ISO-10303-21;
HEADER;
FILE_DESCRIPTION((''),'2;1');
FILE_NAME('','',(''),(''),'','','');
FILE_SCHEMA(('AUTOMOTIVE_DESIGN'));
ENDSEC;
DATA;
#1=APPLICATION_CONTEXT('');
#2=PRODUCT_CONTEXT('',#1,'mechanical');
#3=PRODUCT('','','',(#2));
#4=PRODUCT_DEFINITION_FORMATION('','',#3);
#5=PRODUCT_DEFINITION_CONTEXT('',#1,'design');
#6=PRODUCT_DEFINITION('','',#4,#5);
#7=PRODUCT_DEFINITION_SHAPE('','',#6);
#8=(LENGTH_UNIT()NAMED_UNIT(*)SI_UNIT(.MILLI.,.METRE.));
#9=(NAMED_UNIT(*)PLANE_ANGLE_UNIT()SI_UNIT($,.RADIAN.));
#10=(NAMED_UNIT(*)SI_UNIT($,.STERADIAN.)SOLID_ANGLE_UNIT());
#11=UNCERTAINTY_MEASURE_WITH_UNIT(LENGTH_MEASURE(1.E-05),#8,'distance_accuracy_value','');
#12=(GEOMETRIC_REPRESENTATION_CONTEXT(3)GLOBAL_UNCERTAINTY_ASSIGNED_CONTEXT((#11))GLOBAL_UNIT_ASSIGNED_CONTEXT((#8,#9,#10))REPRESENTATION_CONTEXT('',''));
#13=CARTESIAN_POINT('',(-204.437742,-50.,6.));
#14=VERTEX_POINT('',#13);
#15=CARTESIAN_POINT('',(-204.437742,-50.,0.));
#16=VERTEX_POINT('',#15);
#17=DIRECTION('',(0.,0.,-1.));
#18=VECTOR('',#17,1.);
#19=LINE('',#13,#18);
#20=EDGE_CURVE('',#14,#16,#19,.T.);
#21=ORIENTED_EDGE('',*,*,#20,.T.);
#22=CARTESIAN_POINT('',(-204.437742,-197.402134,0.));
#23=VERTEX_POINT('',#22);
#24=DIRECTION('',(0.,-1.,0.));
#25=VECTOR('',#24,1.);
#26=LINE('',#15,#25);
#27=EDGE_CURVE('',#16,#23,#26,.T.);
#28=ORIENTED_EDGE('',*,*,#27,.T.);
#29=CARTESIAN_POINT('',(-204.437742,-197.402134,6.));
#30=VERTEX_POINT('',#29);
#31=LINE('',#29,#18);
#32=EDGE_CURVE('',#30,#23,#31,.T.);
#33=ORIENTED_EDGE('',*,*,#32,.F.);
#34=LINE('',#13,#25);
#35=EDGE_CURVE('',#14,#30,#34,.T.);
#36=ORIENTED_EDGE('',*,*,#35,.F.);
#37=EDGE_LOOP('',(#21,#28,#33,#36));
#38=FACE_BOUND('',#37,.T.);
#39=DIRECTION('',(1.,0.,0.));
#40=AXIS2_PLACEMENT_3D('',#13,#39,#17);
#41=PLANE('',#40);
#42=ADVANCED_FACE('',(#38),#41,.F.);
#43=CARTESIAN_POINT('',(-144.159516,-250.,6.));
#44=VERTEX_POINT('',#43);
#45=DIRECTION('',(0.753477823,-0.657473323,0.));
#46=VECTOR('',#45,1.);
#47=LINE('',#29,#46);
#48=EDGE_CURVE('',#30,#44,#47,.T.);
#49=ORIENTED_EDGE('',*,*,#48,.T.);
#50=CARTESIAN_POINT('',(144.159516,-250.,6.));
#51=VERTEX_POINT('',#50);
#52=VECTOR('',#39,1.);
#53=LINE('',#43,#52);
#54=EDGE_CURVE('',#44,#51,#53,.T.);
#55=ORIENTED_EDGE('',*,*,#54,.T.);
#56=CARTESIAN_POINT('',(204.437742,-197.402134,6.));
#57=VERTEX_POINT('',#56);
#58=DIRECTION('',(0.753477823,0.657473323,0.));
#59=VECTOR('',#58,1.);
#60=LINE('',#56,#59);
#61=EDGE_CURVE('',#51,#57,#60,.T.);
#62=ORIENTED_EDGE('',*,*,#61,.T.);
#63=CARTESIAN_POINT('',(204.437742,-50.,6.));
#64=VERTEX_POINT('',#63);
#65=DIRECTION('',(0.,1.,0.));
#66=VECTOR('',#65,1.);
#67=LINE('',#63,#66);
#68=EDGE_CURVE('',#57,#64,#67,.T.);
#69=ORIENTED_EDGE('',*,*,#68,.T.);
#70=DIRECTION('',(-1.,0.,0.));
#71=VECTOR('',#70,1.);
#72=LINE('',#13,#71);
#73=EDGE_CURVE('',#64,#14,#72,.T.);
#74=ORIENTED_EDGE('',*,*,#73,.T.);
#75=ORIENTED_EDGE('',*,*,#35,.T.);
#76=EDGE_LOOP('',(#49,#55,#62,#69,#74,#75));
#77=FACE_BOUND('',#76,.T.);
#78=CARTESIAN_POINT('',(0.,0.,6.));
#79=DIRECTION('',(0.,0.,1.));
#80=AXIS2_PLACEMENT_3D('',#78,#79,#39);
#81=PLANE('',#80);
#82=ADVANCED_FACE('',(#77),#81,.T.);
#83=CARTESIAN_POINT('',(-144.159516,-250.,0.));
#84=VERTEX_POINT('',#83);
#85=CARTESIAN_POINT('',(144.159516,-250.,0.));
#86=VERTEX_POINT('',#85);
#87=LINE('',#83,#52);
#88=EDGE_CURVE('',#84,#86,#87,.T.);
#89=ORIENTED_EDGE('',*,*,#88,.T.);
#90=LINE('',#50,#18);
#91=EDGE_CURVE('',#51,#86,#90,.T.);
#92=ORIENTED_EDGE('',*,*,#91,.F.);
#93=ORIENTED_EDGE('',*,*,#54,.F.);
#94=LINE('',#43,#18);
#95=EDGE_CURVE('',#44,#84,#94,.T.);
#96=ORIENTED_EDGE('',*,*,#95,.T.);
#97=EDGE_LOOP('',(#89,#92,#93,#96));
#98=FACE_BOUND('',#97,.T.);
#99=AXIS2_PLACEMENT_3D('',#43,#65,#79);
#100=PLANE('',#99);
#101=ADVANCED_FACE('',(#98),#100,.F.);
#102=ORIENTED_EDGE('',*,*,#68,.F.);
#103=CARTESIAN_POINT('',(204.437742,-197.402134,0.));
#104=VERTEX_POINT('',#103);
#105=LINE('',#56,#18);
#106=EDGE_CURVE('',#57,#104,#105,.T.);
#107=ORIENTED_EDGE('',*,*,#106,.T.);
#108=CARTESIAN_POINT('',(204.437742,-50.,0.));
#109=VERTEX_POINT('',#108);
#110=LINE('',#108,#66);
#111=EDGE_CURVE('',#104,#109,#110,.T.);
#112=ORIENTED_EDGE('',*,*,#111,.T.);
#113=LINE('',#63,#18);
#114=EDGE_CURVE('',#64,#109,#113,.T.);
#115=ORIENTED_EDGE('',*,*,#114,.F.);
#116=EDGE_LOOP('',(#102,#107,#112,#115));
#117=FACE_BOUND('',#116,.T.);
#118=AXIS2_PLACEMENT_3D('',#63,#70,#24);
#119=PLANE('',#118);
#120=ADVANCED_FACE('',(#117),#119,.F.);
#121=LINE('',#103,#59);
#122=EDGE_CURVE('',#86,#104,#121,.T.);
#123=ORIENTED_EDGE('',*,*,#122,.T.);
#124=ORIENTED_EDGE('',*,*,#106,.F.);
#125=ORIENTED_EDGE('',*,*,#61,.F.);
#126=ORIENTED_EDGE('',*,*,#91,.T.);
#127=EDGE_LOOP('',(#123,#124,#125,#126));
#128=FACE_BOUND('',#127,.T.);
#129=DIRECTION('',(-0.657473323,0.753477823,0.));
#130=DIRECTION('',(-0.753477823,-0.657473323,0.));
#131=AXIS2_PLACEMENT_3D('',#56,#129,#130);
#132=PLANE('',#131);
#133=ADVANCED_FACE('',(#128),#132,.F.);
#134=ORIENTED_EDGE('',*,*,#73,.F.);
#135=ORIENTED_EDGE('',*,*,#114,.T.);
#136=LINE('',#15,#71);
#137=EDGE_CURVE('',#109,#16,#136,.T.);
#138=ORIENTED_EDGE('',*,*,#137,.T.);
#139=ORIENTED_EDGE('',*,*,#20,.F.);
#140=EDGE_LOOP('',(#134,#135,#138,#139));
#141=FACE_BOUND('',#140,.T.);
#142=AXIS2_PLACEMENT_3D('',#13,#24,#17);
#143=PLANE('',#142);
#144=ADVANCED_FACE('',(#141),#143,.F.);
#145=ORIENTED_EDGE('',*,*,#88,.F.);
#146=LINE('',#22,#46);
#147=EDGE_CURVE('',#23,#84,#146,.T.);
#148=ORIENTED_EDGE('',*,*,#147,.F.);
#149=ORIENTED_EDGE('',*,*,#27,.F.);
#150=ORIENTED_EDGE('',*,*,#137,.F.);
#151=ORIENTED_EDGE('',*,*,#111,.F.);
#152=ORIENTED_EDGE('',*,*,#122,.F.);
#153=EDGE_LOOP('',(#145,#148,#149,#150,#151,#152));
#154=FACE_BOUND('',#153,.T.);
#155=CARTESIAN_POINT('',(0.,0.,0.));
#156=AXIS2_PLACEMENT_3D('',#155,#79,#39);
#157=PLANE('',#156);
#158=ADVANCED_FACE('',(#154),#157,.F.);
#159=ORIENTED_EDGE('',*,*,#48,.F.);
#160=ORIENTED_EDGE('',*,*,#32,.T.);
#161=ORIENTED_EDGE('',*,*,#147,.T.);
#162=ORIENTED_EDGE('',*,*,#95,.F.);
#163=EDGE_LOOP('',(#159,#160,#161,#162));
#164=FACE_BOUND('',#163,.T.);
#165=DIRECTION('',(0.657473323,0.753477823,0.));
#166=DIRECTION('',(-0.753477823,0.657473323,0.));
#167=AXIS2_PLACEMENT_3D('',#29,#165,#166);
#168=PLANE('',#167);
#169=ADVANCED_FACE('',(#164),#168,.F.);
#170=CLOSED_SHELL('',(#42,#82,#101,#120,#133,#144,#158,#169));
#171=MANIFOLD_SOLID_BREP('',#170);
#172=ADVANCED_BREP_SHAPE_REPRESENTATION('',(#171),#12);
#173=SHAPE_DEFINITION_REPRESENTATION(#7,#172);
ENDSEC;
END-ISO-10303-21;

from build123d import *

# Parameters (mm, degrees)
SM_BASE_FLANGE_1_DEPTH = 6


# Sheet-metal steps are written as plain solids
with BuildPart() as part:
    # Sketch 1 → Базовая кромка1 (new body)
    with BuildSketch(Plane.XY):
        Polygon((-204.43774199, -50), (204.43774199, -50), (204.43774199, -197.402134184), (144.15951614, -250), (-144.15951614, -250), (-204.43774199, -197.402134184), align=None)
    extrude(amount=SM_BASE_FLANGE_1_DEPTH)


solid = part.part
